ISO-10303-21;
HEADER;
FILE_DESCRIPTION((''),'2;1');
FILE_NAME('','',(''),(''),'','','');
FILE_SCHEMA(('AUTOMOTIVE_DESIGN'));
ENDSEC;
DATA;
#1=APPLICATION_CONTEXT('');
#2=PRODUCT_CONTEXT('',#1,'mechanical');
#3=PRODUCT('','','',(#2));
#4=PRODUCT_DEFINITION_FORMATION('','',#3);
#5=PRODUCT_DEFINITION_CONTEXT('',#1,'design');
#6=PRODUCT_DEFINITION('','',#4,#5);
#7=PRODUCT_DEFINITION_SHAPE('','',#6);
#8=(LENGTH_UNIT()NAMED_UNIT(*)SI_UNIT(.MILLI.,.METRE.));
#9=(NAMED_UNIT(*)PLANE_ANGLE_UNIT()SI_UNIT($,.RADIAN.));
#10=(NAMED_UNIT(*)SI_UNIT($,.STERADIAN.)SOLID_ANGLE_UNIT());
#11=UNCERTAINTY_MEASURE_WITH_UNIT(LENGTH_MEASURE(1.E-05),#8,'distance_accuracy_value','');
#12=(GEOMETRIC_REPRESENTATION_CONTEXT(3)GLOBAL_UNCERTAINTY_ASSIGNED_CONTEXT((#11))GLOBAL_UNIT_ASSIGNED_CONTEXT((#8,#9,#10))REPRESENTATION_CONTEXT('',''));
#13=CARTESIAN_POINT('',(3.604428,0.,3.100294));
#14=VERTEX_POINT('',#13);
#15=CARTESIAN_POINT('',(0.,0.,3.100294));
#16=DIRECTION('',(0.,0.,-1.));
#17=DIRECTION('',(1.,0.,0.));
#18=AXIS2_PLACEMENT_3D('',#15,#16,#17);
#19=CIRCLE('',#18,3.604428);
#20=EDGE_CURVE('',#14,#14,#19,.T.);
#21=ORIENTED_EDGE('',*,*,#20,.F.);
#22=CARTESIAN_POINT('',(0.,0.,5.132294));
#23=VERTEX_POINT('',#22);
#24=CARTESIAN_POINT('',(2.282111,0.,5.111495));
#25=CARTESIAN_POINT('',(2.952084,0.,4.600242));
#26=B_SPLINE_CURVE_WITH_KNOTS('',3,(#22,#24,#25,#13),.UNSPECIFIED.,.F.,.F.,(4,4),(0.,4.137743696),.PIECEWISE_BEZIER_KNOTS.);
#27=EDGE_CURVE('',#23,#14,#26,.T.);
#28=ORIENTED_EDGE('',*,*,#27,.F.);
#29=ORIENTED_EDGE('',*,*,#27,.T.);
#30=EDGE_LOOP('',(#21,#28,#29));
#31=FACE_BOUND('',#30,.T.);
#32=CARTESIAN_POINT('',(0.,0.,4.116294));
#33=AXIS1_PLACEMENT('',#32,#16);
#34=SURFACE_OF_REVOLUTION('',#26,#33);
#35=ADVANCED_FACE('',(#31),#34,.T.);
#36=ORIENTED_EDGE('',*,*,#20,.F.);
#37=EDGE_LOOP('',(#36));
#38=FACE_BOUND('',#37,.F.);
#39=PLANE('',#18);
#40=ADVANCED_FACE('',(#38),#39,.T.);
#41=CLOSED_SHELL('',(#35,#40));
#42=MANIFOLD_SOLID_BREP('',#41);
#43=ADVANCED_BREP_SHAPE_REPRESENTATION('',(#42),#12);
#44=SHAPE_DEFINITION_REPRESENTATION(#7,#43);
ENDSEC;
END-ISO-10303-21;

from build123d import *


# Not quite as in the source:
# - the program builds the solid bodies; features that only make, move or delete a surface that nothing else refers to are left out


with BuildPart() as f3:
    # F2 (on Front) → F3 (revolve)
    with BuildSketch(Plane.XZ):
        with BuildLine():
            add(Edge.make_bspline(
                [(0, 5.132293878), (2.2821105085, 5.1114950329), (2.9520839453, 4.6002417803), (3.6044276785, 3.100293878)],
                knots=[0, 0, 0, 0, 4.1377436955, 4.1377436955, 4.1377436955, 4.1377436955], degree=3))
            Line((0, 5.132293878), (0, 3.100293878))
            Line((0, 3.100293878), (3.6044276785, 3.100293878))
        make_face()
    revolve(axis=Axis((0, 0, 4.116293878), (0, 0, -1)))


solid = f3.part
